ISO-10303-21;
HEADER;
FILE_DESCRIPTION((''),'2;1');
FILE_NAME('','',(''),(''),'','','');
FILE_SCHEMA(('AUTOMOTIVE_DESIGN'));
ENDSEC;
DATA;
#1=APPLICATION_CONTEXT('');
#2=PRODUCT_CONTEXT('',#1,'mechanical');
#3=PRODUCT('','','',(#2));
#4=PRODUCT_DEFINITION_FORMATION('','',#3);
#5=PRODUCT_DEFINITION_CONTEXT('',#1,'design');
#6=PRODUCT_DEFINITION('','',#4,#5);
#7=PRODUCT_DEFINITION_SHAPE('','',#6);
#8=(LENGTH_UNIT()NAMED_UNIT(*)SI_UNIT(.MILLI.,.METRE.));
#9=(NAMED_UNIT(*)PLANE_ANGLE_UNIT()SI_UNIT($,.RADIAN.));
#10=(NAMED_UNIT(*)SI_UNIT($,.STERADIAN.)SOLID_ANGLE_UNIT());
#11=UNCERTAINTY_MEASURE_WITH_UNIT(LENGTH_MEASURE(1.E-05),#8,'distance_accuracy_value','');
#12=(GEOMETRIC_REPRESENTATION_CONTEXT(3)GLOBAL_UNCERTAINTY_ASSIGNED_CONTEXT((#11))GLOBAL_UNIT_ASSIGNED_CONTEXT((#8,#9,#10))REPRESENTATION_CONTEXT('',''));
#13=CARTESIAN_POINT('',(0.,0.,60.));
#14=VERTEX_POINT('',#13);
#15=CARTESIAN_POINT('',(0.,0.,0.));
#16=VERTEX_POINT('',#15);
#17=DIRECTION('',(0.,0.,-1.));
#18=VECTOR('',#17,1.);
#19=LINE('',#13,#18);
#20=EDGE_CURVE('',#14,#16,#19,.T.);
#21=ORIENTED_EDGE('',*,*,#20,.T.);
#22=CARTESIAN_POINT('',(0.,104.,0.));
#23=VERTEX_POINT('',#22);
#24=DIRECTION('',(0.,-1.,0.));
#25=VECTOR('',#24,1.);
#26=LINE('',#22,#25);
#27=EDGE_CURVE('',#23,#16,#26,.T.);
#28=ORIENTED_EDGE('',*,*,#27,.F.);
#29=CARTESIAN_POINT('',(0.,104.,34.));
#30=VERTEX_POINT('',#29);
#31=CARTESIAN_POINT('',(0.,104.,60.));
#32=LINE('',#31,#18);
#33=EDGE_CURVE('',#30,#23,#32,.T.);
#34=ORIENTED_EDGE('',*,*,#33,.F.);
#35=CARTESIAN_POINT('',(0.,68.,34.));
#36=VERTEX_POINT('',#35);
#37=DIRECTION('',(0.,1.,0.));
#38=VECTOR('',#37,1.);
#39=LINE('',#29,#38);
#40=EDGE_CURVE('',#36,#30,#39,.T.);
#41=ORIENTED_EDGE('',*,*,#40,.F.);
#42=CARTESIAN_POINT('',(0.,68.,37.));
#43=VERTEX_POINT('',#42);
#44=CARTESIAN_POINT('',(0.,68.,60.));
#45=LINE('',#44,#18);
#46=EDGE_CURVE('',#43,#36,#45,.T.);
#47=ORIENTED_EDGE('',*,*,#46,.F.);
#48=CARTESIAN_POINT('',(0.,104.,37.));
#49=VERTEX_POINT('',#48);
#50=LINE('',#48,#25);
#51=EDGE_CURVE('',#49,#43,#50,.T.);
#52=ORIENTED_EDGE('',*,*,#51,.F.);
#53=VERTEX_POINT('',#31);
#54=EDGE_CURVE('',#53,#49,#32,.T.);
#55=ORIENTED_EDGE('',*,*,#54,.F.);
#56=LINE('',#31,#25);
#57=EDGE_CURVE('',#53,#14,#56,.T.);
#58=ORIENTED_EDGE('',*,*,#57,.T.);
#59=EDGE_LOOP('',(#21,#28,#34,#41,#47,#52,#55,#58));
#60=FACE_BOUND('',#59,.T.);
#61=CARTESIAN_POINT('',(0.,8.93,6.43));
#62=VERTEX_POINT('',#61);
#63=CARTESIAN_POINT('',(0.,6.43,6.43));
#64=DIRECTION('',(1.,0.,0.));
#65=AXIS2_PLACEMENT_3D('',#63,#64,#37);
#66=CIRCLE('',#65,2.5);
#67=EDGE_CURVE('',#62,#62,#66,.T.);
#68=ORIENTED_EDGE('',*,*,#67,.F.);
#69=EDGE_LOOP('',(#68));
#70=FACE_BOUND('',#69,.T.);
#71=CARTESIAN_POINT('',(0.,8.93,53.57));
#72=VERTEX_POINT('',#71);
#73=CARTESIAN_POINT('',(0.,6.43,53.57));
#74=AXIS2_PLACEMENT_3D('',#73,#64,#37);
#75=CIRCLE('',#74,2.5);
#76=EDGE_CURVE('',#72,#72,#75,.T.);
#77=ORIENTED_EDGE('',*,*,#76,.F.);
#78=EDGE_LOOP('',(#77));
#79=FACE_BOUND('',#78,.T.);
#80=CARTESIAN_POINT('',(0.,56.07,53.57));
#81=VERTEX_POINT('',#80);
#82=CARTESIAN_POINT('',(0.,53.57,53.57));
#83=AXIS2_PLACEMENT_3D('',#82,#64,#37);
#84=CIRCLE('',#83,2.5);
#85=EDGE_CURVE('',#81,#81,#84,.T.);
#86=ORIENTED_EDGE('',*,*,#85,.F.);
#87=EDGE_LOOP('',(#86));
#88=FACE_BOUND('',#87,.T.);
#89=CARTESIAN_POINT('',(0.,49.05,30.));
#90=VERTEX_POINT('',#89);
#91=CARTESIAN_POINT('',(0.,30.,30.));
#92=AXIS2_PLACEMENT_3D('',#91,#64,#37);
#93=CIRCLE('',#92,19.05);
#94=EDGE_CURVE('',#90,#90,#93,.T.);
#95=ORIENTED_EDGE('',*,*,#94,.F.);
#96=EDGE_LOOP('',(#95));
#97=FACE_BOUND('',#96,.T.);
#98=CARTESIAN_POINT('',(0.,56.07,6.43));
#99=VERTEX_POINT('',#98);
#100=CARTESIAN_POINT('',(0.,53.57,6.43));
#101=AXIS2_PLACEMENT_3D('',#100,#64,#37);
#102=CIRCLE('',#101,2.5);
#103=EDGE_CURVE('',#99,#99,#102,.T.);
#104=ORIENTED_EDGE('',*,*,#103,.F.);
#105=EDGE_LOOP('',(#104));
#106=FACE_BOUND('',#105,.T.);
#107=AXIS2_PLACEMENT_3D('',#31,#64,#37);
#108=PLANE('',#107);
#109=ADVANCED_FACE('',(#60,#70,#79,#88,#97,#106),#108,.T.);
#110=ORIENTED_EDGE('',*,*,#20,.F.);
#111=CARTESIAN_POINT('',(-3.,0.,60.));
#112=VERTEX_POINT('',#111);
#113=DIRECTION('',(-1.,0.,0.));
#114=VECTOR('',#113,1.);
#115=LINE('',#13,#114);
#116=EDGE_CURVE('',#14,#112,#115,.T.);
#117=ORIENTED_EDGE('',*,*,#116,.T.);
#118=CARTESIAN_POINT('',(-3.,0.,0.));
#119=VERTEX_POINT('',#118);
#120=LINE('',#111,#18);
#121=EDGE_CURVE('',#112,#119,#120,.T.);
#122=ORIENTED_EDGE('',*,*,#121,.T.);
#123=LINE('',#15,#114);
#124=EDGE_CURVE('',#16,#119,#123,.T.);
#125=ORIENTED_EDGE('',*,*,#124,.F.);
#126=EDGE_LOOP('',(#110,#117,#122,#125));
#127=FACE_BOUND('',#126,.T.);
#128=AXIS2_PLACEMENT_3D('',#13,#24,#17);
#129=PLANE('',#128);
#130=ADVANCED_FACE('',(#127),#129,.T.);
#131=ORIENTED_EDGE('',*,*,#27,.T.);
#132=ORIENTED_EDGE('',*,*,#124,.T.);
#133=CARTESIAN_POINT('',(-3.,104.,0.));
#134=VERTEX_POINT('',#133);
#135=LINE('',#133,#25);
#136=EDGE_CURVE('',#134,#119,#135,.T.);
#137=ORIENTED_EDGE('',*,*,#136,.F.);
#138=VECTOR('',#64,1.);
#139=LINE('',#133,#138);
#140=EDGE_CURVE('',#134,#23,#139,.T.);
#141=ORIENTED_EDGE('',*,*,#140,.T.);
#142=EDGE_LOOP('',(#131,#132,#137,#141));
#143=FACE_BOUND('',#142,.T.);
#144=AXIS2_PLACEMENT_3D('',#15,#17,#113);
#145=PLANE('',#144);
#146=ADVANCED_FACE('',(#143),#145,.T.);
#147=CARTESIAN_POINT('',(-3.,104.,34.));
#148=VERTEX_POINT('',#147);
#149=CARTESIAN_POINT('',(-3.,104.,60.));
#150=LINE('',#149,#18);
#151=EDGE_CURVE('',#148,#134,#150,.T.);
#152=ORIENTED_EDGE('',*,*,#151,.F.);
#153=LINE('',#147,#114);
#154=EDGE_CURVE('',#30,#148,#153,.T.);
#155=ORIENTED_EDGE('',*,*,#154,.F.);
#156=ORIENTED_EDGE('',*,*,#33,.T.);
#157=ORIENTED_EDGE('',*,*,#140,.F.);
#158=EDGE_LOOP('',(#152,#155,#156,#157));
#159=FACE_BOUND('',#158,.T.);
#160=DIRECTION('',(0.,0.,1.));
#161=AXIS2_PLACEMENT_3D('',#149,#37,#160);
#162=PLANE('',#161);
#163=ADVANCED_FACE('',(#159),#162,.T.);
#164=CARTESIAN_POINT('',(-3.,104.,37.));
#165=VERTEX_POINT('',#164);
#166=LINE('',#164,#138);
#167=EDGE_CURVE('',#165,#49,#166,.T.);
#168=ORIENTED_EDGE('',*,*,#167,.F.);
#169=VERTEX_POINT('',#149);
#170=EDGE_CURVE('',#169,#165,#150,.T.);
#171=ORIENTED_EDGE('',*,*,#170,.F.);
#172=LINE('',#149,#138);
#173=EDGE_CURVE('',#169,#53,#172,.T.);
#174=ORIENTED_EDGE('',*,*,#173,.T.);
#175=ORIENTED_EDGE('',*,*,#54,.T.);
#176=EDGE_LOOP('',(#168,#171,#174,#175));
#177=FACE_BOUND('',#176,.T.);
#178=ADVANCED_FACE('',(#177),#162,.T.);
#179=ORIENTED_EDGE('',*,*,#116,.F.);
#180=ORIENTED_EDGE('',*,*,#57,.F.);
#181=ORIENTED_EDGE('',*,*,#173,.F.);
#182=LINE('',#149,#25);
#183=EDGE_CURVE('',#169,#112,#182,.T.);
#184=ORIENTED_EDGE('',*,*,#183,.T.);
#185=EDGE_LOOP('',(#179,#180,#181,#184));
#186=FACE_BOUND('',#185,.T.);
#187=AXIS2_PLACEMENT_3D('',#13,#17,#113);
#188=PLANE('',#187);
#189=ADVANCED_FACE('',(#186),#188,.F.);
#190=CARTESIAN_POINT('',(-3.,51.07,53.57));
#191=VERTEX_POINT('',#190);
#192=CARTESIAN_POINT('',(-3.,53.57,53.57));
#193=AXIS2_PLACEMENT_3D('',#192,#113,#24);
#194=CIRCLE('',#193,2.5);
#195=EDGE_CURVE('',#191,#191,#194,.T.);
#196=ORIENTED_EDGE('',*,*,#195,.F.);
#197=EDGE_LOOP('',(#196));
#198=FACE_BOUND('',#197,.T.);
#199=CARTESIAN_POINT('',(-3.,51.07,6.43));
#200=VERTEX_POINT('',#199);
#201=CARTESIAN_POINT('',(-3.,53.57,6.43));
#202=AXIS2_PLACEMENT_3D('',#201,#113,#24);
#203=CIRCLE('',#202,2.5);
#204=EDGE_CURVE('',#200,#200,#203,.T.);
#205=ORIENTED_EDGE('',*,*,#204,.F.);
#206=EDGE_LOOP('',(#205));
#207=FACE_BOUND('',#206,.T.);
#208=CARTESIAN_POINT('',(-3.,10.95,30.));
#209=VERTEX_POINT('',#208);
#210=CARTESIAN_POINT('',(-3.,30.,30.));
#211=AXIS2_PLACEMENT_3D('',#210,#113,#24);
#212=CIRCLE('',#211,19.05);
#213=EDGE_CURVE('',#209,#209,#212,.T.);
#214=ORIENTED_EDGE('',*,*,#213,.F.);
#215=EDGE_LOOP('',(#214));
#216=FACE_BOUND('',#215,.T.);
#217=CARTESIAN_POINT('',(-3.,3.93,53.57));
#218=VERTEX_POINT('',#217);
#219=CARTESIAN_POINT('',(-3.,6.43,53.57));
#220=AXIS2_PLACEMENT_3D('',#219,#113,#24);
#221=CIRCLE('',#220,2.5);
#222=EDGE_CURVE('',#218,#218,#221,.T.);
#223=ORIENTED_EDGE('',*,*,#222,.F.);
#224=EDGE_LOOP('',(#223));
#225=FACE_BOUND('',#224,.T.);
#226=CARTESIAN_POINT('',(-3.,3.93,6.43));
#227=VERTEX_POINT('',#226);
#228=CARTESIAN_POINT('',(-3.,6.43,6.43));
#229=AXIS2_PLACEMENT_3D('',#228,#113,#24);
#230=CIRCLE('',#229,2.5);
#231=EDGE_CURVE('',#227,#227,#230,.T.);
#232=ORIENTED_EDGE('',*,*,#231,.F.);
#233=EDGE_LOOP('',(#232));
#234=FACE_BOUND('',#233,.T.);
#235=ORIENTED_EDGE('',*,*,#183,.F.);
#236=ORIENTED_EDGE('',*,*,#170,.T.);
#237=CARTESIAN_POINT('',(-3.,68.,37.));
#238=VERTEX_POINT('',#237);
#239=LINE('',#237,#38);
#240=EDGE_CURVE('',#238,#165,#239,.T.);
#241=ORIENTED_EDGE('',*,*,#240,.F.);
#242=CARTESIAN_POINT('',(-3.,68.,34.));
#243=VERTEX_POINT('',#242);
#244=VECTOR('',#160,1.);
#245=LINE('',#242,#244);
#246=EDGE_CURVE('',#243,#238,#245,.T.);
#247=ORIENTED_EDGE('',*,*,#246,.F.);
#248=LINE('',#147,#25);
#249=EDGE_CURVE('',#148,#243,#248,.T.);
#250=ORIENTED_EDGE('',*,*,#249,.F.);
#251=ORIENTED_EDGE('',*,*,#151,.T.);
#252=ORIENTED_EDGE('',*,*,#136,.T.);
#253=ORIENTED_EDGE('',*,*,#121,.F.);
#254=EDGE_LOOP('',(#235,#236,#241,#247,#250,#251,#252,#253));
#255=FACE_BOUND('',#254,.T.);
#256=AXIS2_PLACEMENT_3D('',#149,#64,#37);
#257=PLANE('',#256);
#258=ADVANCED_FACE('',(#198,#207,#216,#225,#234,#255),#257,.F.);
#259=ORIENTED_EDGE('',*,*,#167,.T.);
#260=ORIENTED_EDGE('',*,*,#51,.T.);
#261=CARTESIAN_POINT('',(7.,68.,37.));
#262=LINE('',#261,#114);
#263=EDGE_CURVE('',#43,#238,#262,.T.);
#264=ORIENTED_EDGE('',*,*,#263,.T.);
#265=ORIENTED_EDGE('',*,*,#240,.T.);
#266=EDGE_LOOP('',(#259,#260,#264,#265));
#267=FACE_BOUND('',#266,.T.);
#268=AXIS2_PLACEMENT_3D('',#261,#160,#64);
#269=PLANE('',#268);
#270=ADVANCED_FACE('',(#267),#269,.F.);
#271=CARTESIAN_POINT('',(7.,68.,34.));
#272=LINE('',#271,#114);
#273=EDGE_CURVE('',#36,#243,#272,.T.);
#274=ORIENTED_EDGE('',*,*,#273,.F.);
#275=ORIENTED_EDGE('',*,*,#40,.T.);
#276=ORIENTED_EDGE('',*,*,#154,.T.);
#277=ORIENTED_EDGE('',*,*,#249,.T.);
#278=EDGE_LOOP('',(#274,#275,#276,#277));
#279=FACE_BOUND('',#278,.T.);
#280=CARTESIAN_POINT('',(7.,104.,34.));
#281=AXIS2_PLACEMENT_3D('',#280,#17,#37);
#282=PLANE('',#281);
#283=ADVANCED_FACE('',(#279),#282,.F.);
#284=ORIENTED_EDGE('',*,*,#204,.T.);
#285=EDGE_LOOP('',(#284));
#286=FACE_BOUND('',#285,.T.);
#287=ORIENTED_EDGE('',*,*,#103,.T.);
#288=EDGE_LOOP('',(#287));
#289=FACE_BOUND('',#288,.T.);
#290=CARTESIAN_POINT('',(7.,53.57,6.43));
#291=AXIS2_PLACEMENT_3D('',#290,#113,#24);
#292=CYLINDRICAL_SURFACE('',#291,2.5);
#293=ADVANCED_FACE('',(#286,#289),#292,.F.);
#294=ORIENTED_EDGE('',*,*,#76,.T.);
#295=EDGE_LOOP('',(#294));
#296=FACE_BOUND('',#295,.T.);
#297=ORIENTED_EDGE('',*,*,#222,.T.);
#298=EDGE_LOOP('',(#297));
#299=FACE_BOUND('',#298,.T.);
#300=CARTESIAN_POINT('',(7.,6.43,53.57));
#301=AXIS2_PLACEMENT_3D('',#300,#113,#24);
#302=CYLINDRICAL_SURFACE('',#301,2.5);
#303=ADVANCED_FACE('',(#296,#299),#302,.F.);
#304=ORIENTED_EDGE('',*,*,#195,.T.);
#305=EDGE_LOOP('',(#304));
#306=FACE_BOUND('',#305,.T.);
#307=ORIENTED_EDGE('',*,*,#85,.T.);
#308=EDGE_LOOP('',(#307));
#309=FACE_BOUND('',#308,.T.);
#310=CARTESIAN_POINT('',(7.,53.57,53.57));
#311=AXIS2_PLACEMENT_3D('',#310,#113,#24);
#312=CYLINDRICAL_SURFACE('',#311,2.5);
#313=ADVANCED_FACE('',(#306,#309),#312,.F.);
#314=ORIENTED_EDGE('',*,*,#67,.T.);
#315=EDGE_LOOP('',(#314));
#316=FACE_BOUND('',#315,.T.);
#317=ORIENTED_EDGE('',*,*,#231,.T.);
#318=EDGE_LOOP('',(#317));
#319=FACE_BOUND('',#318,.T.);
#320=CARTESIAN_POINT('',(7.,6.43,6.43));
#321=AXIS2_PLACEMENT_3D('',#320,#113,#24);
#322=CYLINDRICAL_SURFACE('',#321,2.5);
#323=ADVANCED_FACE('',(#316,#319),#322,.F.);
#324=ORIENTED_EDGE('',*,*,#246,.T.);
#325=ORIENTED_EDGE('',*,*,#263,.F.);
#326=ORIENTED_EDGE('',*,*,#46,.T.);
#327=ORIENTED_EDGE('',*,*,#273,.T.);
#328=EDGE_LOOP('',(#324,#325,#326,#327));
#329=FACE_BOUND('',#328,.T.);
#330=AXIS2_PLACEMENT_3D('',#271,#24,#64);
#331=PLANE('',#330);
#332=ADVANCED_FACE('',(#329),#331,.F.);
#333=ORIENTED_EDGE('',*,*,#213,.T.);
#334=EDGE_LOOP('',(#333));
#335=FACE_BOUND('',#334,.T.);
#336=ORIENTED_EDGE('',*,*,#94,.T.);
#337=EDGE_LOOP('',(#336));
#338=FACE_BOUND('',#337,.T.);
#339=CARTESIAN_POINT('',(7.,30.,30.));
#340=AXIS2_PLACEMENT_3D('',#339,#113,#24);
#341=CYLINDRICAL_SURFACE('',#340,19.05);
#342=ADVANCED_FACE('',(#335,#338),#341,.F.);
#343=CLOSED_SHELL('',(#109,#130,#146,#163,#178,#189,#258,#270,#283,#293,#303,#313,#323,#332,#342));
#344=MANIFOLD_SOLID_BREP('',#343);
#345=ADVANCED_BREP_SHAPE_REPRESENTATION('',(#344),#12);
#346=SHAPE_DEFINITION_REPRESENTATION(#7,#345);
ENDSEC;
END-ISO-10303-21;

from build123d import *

# Parameters (mm, degrees)
SKETCH2_W          = 3
SKETCH2_H          = 104
BASE_FLANGE1_DEPTH = 60
SKETCH4_R          = 2.5
SKETCH4_R_2        = 19.05
CUT_EXTRUDE2_DEPTH = 10
SKETCH5_W          = 3
SKETCH5_H          = 36
CUT_EXTRUDE4_DEPTH = 10


# Sheet-metal steps are written as plain solids
with BuildPart() as part:
    # Sketch2 → Base-Flange1 (new body)
    with BuildSketch(Plane.XY):
        with Locations((-1.5, 52)):
            Rectangle(SKETCH2_W, SKETCH2_H)
    extrude(amount=BASE_FLANGE1_DEPTH)

    # Sketch4 → Cut-Extrude2 (cut)
    with BuildSketch(Plane.ZY.offset(3)):
        with Locations(Location((6.43, 6.43, 0), (0, 0, 270))):
            Circle(SKETCH4_R)
        with Locations(Location((30, 30, 0), (0, 0, 270))):
            Circle(SKETCH4_R_2)
        with Locations(Location((6.43, 53.57, 0), (0, 0, 270))):
            Circle(SKETCH4_R)
        with Locations(Location((53.57, 6.43, 0), (0, 0, 270))):
            Circle(SKETCH4_R)
        with Locations(Location((53.57, 53.57, 0), (0, 0, 270))):
            Circle(SKETCH4_R)
    extrude(amount=-CUT_EXTRUDE2_DEPTH, mode=Mode.SUBTRACT)

    # Sketch5 → Cut-Extrude4 (cut)
    with BuildSketch(Plane.ZY.offset(3)):
        with Locations((35.5, 86)):
            Rectangle(SKETCH5_W, SKETCH5_H)
    extrude(amount=-CUT_EXTRUDE4_DEPTH, mode=Mode.SUBTRACT)


solid = part.part
